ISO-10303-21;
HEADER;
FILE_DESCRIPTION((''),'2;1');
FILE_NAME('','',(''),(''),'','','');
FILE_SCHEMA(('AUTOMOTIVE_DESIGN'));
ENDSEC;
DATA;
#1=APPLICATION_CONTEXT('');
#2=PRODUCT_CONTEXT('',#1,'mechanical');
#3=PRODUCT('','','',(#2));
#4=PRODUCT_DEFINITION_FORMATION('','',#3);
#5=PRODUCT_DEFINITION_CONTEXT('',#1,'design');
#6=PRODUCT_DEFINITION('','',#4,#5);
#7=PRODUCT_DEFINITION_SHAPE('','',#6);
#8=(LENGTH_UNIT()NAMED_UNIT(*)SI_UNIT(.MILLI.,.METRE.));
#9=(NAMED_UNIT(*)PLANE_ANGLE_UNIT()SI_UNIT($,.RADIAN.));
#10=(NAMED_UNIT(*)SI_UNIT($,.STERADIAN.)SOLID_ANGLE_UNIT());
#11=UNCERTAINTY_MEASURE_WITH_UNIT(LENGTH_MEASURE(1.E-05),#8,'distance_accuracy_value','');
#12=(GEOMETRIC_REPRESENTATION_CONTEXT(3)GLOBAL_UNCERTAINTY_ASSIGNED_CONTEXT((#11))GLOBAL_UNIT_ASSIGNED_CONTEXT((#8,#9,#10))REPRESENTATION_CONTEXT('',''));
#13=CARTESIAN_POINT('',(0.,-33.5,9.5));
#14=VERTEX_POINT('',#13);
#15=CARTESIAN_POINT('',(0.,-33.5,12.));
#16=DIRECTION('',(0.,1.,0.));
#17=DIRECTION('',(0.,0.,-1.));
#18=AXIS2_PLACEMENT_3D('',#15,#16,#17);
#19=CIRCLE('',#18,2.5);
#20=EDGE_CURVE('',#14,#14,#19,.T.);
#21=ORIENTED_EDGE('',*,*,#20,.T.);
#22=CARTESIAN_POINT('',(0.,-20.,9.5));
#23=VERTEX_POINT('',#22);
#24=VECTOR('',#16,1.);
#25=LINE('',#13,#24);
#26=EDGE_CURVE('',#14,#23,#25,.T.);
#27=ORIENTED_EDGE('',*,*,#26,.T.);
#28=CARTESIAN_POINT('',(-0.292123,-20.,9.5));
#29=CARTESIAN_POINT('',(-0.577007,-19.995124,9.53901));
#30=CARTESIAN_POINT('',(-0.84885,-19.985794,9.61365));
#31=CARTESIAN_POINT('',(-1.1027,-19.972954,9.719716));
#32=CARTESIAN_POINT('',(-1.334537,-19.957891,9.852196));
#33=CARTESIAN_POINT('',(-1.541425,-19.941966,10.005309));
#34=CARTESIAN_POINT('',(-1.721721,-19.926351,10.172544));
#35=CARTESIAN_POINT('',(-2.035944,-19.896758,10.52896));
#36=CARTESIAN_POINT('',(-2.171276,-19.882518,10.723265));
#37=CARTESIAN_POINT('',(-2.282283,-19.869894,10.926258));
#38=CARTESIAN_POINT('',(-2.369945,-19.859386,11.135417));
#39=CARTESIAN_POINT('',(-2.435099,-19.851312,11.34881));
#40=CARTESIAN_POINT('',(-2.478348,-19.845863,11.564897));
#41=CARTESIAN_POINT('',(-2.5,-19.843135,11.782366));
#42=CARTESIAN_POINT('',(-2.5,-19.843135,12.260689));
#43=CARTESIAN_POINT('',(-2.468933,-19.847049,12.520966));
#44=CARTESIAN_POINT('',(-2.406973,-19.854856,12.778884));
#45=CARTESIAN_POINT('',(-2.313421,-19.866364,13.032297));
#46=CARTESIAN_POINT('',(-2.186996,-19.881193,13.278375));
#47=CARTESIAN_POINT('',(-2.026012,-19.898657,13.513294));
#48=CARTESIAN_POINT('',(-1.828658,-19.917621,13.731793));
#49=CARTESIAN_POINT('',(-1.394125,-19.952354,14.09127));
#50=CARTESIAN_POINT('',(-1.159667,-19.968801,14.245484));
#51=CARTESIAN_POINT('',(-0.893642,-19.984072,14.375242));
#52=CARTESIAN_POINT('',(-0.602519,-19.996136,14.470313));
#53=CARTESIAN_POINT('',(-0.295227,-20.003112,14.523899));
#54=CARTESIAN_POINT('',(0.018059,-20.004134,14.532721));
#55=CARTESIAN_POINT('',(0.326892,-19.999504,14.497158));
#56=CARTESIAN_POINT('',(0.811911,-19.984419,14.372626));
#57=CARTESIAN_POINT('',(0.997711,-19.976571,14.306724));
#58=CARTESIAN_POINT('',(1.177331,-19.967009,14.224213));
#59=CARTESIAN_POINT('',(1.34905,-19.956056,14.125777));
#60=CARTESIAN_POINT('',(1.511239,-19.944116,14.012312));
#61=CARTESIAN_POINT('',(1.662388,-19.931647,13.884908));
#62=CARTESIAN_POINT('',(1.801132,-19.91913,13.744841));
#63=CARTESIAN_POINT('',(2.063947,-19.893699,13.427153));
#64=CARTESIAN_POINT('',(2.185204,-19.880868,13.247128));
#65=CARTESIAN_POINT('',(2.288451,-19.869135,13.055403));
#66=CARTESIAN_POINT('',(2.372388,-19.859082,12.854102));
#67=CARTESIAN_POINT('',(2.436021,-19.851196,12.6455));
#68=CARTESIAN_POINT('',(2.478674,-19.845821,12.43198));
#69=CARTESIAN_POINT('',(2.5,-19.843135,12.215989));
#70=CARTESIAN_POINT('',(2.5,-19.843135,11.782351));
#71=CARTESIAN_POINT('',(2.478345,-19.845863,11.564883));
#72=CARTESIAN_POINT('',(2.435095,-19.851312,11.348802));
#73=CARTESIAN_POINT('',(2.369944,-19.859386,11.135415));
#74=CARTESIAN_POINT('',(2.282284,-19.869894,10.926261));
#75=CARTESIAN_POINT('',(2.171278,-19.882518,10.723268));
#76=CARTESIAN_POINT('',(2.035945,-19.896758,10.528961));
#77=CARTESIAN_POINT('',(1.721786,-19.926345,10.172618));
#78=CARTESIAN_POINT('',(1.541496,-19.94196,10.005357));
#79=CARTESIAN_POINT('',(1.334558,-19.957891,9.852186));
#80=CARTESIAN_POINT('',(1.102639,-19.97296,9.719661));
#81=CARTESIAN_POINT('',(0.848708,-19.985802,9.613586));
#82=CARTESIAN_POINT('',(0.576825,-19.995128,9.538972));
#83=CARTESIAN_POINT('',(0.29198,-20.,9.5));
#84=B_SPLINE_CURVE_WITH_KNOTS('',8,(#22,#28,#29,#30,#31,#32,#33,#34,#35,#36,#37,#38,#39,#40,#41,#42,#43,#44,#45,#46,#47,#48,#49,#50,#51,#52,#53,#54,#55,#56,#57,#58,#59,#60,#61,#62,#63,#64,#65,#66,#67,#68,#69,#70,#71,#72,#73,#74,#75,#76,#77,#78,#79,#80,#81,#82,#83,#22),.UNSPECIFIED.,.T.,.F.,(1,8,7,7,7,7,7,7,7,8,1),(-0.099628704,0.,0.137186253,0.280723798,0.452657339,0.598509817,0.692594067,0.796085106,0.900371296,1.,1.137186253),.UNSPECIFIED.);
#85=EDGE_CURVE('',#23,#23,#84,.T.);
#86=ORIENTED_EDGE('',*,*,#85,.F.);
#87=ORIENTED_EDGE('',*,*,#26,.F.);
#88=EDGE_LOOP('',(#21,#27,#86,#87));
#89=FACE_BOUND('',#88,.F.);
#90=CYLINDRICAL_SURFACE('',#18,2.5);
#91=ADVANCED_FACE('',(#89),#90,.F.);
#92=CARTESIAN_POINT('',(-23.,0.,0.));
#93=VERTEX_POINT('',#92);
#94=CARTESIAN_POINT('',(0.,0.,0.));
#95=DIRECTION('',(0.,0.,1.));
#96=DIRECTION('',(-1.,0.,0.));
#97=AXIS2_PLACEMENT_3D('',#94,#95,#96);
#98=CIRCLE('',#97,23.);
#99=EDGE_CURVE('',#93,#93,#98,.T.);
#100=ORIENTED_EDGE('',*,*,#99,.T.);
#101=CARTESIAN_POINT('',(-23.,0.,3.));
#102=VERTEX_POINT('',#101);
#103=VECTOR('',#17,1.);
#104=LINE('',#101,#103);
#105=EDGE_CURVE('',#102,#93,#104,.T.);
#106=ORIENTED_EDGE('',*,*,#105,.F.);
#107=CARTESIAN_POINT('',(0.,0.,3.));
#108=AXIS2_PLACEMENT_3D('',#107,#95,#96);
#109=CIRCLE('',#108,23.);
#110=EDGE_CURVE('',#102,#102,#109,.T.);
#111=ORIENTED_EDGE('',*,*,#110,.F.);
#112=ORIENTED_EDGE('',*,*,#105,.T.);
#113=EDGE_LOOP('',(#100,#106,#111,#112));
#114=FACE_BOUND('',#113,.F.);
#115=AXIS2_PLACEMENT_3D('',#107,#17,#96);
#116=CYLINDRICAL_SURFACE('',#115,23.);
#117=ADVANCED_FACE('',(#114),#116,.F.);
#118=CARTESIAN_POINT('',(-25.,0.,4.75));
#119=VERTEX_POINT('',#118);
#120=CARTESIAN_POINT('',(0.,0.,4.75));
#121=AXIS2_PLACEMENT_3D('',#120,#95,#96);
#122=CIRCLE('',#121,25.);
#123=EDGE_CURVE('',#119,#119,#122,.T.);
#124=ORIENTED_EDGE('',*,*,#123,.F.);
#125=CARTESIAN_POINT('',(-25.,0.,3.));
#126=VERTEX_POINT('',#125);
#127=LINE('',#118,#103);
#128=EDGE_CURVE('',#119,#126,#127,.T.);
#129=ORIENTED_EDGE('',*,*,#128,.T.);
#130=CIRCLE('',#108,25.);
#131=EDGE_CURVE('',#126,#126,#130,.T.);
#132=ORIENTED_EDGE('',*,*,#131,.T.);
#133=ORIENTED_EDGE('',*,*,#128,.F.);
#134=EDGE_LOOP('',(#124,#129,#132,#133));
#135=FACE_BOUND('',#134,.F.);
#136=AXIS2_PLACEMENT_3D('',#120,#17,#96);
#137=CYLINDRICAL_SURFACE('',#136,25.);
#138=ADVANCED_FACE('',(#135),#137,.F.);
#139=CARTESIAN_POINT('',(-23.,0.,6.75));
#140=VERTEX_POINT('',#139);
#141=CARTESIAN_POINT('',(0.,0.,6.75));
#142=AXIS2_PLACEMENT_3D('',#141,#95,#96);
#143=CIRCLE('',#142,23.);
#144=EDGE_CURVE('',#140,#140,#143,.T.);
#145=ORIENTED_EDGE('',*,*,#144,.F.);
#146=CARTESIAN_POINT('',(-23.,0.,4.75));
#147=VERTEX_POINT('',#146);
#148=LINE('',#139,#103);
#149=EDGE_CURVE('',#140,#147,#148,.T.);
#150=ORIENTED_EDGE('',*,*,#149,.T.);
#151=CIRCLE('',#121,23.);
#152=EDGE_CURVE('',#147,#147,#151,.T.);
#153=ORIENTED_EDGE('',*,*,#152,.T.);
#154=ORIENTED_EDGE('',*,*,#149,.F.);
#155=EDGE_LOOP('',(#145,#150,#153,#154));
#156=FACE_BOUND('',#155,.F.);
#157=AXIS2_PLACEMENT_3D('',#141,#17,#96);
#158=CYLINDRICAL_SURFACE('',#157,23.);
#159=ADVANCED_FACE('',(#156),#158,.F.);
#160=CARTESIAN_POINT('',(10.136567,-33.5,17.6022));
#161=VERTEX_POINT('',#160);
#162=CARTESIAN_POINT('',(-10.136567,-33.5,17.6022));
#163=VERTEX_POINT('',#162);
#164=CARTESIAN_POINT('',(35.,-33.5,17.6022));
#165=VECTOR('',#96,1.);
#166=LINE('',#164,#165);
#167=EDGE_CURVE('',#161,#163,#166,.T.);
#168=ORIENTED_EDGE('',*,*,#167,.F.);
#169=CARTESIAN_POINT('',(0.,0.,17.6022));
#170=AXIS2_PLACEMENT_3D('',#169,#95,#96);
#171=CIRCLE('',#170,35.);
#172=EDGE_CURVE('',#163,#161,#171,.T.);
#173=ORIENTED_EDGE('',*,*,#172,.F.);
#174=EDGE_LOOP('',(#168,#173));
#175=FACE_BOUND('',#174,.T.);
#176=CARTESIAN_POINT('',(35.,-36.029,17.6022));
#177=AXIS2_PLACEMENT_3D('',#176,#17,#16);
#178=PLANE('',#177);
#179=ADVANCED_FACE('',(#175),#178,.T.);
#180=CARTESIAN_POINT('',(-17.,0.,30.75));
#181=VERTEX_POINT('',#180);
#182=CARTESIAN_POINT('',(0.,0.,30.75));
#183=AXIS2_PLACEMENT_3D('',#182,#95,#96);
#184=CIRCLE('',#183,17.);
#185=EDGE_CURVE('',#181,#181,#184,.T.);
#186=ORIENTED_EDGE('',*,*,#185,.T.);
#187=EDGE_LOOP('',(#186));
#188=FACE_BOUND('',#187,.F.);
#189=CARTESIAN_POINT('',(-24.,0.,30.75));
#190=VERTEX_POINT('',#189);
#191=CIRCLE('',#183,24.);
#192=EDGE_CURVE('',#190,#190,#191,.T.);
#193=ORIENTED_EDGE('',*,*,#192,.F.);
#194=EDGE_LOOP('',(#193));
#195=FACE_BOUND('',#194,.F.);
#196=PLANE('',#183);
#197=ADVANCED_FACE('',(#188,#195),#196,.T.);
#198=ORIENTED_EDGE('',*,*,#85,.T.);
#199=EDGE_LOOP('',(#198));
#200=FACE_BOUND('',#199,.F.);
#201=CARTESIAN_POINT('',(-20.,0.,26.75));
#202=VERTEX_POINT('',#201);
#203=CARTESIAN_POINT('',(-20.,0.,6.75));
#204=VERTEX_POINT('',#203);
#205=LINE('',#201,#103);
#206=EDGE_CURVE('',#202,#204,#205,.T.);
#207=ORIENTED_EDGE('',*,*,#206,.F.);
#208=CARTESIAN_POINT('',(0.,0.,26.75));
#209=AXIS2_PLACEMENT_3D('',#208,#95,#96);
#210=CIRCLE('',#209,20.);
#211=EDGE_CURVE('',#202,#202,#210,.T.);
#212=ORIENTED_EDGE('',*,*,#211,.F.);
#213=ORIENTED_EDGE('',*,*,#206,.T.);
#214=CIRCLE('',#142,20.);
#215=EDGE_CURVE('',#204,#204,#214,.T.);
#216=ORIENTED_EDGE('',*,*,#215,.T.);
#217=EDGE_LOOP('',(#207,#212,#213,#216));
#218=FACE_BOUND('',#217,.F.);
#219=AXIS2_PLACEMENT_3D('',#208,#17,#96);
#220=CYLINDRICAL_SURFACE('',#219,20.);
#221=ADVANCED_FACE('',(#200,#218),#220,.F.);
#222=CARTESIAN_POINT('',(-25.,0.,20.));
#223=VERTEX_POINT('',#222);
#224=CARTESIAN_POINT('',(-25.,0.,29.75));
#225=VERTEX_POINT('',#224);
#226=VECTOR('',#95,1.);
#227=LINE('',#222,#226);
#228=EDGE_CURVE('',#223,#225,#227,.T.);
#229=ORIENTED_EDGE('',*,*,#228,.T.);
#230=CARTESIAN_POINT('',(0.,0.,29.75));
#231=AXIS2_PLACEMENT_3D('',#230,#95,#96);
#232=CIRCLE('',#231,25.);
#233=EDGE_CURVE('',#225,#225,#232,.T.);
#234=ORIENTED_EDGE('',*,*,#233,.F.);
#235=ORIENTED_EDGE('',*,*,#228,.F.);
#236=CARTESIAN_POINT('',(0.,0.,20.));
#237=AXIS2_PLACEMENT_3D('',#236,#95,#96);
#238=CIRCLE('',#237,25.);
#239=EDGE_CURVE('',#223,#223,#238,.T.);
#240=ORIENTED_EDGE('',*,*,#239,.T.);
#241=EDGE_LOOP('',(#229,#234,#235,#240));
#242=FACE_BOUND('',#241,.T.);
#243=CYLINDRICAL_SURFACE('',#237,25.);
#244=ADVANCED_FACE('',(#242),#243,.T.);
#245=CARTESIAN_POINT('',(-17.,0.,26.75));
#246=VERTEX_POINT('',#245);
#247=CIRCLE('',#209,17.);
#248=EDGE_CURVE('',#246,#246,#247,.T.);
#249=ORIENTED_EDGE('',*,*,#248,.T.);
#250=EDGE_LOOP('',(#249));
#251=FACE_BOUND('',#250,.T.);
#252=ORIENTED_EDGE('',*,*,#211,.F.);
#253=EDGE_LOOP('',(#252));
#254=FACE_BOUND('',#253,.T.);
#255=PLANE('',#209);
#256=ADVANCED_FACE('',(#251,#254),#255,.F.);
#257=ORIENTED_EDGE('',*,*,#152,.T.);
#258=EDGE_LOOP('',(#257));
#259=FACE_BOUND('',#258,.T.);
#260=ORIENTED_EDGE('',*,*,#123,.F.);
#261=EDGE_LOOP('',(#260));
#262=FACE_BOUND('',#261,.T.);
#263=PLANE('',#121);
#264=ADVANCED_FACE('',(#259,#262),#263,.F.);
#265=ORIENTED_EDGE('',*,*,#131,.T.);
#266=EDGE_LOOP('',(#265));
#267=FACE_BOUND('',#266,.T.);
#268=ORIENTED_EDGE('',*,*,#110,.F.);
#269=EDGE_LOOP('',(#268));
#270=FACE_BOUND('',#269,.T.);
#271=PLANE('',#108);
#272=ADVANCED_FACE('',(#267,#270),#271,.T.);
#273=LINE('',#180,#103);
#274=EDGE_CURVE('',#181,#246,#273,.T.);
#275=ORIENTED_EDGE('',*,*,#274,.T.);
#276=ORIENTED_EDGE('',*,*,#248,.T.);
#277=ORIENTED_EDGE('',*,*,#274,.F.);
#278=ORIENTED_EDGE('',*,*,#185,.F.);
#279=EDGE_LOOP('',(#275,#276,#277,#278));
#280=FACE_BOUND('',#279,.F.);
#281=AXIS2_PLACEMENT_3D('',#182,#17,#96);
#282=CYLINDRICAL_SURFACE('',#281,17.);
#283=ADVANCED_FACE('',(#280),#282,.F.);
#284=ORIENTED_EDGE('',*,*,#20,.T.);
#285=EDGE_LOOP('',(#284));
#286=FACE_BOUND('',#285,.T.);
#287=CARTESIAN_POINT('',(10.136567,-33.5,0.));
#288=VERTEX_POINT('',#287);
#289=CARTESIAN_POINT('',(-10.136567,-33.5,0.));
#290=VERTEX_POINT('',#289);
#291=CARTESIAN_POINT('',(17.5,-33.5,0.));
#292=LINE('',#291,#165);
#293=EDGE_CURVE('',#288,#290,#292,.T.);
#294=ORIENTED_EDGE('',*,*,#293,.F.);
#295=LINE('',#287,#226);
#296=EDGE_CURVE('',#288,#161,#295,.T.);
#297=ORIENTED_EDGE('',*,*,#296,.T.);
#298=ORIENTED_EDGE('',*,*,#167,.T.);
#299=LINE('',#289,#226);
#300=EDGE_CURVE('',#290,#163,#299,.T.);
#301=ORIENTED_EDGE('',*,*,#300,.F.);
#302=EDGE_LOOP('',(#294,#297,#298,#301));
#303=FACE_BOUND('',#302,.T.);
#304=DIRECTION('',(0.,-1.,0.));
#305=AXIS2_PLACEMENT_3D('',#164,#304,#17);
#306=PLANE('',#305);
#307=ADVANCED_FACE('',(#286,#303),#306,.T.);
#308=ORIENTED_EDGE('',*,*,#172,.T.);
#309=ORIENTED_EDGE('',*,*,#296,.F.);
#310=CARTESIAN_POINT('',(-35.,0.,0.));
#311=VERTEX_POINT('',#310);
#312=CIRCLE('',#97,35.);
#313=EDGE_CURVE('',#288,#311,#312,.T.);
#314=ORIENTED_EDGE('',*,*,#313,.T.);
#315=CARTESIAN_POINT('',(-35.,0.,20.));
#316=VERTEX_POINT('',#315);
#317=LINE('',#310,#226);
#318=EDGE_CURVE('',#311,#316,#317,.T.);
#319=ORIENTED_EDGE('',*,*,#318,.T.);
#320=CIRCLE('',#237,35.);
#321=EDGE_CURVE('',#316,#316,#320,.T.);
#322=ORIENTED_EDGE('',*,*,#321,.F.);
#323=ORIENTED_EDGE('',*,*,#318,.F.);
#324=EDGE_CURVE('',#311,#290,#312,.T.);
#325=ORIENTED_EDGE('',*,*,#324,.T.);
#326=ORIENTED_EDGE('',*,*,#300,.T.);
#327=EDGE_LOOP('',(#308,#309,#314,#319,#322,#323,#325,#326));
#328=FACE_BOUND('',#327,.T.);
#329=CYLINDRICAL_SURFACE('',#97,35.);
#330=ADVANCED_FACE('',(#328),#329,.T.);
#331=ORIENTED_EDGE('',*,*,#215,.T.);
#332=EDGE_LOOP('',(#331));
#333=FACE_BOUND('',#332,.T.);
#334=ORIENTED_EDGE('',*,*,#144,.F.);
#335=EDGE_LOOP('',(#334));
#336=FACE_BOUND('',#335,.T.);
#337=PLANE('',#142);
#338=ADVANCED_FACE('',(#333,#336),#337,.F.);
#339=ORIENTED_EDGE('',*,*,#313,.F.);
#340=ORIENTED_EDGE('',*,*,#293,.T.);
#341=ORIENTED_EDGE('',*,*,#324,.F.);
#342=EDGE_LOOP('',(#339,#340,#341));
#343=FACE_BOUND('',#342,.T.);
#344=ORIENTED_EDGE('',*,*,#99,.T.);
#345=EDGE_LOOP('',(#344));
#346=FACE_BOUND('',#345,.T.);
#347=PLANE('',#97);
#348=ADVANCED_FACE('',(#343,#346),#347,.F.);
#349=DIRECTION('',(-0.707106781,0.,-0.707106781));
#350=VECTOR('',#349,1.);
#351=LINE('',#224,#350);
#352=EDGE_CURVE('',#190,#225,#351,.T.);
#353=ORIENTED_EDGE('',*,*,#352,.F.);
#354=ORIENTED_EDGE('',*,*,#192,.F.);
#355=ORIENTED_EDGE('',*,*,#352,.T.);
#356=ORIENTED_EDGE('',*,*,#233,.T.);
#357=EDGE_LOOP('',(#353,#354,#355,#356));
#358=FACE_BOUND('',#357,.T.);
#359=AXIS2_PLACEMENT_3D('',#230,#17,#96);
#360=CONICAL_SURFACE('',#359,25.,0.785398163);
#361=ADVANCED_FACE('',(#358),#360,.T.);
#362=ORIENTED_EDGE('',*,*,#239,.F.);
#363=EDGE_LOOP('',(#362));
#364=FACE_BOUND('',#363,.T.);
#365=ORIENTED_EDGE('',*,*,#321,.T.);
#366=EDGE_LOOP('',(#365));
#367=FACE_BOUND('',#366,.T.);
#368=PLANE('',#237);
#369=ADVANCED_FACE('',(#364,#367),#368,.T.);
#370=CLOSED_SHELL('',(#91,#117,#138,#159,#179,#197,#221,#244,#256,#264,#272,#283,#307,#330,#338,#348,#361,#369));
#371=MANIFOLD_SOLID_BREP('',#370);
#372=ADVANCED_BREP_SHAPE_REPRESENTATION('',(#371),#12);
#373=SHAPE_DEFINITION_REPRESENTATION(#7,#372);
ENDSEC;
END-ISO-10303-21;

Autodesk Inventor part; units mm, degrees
ref_plane "XZ Plane" through (0, 0, 0) normal (0, 1, 0) x (-1, 0, 0)
ref_plane "XY Plane" through (0, 0, 0) normal (0, 0, 1) x (1, 0, 0)
sketch "Skizze1" plane through (0, 0, 0) normal (0, 1, 0) x (-1, 0, 0)
  line L0 (17, 30.75) -> (17, 26.75)
  line L1 (17, 26.75) -> (20, 26.75)
  line L2 (20, 26.75) -> (20, 6.75)
  line L3 (23, 0) -> (35, 0)
  line L4 (35, 0) -> (35, 20)
  line L5 (35, 20) -> (25, 20)
  line L6 (25, 20) -> (25, 30.75)
  line L7 (17, 30.75) -> (25, 30.75)
  line L8 (0, 0) -> (0, 48.4152)
  line L9 (20, 6.75) -> (23, 6.75)
  line L10 (23, 6.75) -> (23, 4.75)
  line L11 (23, 4.75) -> (25, 4.75)
  line L12 (25, 4.75) -> (25, 3)
  line L13 (25, 3) -> (23, 3)
  line L14 (23, 3) -> (23, 0)
  point P0 (17, 4)
  dimension "d1" = 40
  dimension "d3" = 20
  dimension "d4" = 70
  dimension "d5" = 50
  dimension "d7" = 4
  dimension "d10" = 2
  dimension "d11" = 1.75
  dimension "d12" = 3
  dimension "d13" = 3
  dimension "d14" = 2
  dimension "d15" = 34
  dimension "d16" = 20
revolve "Umdrehung1" add sketch "Skizze1" angle 360 about axis through (0, 0, 0) along (0, 0, 1)
ref_plane "Arbeitsebene1" through (35, 0, 10) normal (1, 0, 0) x (0, 1, 0)
sketch "Skizze5" plane through (35, 0, 10) normal (1, 0, 0) x (0, 1, 0)
  line L0 (-36.029, 7.6022) -> (-33.5, 7.6022)
  line L1 (-33.5, 7.6022) -> (-33.5, -10.6796)
  line L2 (-33.5, -10.6796) -> (-36.029, -10.6796)
  line L3 (-36.029, -10.6796) -> (-36.029, 7.6022)
  line L4 (0, 27.0359) -> (0, -16.9655) projected
  point P0 (0, -10)
  dimension "d37" = 33.5
extrude "Extrusion3" cut sketch "Skizze5" against normal through all
sketch "Skizze6" plane through (-10.1366, -33.5, 0) normal (0, -1, 0) x (1, 0, 0)
  line L0 (20.2731, 0) -> (0, 0) projected
  point P0 (10.1366, 0)
  point P1 (10.1366, 12)
  dimension "d47" = 12
hole "Bohrung2" at (0, -33.5, 12) direction (0, 1, 0) diameter 5 end up to surface
thread "Gewinde1" size "M6x1" class "6H" standard "ANSI Metric M Profile" full length
chamfer "Fase2" distance 1 angle 45 1 edges at (25, 0, 30.75)
properties part number "KON_Nietmaschine_Deckel" material "Stahl"
